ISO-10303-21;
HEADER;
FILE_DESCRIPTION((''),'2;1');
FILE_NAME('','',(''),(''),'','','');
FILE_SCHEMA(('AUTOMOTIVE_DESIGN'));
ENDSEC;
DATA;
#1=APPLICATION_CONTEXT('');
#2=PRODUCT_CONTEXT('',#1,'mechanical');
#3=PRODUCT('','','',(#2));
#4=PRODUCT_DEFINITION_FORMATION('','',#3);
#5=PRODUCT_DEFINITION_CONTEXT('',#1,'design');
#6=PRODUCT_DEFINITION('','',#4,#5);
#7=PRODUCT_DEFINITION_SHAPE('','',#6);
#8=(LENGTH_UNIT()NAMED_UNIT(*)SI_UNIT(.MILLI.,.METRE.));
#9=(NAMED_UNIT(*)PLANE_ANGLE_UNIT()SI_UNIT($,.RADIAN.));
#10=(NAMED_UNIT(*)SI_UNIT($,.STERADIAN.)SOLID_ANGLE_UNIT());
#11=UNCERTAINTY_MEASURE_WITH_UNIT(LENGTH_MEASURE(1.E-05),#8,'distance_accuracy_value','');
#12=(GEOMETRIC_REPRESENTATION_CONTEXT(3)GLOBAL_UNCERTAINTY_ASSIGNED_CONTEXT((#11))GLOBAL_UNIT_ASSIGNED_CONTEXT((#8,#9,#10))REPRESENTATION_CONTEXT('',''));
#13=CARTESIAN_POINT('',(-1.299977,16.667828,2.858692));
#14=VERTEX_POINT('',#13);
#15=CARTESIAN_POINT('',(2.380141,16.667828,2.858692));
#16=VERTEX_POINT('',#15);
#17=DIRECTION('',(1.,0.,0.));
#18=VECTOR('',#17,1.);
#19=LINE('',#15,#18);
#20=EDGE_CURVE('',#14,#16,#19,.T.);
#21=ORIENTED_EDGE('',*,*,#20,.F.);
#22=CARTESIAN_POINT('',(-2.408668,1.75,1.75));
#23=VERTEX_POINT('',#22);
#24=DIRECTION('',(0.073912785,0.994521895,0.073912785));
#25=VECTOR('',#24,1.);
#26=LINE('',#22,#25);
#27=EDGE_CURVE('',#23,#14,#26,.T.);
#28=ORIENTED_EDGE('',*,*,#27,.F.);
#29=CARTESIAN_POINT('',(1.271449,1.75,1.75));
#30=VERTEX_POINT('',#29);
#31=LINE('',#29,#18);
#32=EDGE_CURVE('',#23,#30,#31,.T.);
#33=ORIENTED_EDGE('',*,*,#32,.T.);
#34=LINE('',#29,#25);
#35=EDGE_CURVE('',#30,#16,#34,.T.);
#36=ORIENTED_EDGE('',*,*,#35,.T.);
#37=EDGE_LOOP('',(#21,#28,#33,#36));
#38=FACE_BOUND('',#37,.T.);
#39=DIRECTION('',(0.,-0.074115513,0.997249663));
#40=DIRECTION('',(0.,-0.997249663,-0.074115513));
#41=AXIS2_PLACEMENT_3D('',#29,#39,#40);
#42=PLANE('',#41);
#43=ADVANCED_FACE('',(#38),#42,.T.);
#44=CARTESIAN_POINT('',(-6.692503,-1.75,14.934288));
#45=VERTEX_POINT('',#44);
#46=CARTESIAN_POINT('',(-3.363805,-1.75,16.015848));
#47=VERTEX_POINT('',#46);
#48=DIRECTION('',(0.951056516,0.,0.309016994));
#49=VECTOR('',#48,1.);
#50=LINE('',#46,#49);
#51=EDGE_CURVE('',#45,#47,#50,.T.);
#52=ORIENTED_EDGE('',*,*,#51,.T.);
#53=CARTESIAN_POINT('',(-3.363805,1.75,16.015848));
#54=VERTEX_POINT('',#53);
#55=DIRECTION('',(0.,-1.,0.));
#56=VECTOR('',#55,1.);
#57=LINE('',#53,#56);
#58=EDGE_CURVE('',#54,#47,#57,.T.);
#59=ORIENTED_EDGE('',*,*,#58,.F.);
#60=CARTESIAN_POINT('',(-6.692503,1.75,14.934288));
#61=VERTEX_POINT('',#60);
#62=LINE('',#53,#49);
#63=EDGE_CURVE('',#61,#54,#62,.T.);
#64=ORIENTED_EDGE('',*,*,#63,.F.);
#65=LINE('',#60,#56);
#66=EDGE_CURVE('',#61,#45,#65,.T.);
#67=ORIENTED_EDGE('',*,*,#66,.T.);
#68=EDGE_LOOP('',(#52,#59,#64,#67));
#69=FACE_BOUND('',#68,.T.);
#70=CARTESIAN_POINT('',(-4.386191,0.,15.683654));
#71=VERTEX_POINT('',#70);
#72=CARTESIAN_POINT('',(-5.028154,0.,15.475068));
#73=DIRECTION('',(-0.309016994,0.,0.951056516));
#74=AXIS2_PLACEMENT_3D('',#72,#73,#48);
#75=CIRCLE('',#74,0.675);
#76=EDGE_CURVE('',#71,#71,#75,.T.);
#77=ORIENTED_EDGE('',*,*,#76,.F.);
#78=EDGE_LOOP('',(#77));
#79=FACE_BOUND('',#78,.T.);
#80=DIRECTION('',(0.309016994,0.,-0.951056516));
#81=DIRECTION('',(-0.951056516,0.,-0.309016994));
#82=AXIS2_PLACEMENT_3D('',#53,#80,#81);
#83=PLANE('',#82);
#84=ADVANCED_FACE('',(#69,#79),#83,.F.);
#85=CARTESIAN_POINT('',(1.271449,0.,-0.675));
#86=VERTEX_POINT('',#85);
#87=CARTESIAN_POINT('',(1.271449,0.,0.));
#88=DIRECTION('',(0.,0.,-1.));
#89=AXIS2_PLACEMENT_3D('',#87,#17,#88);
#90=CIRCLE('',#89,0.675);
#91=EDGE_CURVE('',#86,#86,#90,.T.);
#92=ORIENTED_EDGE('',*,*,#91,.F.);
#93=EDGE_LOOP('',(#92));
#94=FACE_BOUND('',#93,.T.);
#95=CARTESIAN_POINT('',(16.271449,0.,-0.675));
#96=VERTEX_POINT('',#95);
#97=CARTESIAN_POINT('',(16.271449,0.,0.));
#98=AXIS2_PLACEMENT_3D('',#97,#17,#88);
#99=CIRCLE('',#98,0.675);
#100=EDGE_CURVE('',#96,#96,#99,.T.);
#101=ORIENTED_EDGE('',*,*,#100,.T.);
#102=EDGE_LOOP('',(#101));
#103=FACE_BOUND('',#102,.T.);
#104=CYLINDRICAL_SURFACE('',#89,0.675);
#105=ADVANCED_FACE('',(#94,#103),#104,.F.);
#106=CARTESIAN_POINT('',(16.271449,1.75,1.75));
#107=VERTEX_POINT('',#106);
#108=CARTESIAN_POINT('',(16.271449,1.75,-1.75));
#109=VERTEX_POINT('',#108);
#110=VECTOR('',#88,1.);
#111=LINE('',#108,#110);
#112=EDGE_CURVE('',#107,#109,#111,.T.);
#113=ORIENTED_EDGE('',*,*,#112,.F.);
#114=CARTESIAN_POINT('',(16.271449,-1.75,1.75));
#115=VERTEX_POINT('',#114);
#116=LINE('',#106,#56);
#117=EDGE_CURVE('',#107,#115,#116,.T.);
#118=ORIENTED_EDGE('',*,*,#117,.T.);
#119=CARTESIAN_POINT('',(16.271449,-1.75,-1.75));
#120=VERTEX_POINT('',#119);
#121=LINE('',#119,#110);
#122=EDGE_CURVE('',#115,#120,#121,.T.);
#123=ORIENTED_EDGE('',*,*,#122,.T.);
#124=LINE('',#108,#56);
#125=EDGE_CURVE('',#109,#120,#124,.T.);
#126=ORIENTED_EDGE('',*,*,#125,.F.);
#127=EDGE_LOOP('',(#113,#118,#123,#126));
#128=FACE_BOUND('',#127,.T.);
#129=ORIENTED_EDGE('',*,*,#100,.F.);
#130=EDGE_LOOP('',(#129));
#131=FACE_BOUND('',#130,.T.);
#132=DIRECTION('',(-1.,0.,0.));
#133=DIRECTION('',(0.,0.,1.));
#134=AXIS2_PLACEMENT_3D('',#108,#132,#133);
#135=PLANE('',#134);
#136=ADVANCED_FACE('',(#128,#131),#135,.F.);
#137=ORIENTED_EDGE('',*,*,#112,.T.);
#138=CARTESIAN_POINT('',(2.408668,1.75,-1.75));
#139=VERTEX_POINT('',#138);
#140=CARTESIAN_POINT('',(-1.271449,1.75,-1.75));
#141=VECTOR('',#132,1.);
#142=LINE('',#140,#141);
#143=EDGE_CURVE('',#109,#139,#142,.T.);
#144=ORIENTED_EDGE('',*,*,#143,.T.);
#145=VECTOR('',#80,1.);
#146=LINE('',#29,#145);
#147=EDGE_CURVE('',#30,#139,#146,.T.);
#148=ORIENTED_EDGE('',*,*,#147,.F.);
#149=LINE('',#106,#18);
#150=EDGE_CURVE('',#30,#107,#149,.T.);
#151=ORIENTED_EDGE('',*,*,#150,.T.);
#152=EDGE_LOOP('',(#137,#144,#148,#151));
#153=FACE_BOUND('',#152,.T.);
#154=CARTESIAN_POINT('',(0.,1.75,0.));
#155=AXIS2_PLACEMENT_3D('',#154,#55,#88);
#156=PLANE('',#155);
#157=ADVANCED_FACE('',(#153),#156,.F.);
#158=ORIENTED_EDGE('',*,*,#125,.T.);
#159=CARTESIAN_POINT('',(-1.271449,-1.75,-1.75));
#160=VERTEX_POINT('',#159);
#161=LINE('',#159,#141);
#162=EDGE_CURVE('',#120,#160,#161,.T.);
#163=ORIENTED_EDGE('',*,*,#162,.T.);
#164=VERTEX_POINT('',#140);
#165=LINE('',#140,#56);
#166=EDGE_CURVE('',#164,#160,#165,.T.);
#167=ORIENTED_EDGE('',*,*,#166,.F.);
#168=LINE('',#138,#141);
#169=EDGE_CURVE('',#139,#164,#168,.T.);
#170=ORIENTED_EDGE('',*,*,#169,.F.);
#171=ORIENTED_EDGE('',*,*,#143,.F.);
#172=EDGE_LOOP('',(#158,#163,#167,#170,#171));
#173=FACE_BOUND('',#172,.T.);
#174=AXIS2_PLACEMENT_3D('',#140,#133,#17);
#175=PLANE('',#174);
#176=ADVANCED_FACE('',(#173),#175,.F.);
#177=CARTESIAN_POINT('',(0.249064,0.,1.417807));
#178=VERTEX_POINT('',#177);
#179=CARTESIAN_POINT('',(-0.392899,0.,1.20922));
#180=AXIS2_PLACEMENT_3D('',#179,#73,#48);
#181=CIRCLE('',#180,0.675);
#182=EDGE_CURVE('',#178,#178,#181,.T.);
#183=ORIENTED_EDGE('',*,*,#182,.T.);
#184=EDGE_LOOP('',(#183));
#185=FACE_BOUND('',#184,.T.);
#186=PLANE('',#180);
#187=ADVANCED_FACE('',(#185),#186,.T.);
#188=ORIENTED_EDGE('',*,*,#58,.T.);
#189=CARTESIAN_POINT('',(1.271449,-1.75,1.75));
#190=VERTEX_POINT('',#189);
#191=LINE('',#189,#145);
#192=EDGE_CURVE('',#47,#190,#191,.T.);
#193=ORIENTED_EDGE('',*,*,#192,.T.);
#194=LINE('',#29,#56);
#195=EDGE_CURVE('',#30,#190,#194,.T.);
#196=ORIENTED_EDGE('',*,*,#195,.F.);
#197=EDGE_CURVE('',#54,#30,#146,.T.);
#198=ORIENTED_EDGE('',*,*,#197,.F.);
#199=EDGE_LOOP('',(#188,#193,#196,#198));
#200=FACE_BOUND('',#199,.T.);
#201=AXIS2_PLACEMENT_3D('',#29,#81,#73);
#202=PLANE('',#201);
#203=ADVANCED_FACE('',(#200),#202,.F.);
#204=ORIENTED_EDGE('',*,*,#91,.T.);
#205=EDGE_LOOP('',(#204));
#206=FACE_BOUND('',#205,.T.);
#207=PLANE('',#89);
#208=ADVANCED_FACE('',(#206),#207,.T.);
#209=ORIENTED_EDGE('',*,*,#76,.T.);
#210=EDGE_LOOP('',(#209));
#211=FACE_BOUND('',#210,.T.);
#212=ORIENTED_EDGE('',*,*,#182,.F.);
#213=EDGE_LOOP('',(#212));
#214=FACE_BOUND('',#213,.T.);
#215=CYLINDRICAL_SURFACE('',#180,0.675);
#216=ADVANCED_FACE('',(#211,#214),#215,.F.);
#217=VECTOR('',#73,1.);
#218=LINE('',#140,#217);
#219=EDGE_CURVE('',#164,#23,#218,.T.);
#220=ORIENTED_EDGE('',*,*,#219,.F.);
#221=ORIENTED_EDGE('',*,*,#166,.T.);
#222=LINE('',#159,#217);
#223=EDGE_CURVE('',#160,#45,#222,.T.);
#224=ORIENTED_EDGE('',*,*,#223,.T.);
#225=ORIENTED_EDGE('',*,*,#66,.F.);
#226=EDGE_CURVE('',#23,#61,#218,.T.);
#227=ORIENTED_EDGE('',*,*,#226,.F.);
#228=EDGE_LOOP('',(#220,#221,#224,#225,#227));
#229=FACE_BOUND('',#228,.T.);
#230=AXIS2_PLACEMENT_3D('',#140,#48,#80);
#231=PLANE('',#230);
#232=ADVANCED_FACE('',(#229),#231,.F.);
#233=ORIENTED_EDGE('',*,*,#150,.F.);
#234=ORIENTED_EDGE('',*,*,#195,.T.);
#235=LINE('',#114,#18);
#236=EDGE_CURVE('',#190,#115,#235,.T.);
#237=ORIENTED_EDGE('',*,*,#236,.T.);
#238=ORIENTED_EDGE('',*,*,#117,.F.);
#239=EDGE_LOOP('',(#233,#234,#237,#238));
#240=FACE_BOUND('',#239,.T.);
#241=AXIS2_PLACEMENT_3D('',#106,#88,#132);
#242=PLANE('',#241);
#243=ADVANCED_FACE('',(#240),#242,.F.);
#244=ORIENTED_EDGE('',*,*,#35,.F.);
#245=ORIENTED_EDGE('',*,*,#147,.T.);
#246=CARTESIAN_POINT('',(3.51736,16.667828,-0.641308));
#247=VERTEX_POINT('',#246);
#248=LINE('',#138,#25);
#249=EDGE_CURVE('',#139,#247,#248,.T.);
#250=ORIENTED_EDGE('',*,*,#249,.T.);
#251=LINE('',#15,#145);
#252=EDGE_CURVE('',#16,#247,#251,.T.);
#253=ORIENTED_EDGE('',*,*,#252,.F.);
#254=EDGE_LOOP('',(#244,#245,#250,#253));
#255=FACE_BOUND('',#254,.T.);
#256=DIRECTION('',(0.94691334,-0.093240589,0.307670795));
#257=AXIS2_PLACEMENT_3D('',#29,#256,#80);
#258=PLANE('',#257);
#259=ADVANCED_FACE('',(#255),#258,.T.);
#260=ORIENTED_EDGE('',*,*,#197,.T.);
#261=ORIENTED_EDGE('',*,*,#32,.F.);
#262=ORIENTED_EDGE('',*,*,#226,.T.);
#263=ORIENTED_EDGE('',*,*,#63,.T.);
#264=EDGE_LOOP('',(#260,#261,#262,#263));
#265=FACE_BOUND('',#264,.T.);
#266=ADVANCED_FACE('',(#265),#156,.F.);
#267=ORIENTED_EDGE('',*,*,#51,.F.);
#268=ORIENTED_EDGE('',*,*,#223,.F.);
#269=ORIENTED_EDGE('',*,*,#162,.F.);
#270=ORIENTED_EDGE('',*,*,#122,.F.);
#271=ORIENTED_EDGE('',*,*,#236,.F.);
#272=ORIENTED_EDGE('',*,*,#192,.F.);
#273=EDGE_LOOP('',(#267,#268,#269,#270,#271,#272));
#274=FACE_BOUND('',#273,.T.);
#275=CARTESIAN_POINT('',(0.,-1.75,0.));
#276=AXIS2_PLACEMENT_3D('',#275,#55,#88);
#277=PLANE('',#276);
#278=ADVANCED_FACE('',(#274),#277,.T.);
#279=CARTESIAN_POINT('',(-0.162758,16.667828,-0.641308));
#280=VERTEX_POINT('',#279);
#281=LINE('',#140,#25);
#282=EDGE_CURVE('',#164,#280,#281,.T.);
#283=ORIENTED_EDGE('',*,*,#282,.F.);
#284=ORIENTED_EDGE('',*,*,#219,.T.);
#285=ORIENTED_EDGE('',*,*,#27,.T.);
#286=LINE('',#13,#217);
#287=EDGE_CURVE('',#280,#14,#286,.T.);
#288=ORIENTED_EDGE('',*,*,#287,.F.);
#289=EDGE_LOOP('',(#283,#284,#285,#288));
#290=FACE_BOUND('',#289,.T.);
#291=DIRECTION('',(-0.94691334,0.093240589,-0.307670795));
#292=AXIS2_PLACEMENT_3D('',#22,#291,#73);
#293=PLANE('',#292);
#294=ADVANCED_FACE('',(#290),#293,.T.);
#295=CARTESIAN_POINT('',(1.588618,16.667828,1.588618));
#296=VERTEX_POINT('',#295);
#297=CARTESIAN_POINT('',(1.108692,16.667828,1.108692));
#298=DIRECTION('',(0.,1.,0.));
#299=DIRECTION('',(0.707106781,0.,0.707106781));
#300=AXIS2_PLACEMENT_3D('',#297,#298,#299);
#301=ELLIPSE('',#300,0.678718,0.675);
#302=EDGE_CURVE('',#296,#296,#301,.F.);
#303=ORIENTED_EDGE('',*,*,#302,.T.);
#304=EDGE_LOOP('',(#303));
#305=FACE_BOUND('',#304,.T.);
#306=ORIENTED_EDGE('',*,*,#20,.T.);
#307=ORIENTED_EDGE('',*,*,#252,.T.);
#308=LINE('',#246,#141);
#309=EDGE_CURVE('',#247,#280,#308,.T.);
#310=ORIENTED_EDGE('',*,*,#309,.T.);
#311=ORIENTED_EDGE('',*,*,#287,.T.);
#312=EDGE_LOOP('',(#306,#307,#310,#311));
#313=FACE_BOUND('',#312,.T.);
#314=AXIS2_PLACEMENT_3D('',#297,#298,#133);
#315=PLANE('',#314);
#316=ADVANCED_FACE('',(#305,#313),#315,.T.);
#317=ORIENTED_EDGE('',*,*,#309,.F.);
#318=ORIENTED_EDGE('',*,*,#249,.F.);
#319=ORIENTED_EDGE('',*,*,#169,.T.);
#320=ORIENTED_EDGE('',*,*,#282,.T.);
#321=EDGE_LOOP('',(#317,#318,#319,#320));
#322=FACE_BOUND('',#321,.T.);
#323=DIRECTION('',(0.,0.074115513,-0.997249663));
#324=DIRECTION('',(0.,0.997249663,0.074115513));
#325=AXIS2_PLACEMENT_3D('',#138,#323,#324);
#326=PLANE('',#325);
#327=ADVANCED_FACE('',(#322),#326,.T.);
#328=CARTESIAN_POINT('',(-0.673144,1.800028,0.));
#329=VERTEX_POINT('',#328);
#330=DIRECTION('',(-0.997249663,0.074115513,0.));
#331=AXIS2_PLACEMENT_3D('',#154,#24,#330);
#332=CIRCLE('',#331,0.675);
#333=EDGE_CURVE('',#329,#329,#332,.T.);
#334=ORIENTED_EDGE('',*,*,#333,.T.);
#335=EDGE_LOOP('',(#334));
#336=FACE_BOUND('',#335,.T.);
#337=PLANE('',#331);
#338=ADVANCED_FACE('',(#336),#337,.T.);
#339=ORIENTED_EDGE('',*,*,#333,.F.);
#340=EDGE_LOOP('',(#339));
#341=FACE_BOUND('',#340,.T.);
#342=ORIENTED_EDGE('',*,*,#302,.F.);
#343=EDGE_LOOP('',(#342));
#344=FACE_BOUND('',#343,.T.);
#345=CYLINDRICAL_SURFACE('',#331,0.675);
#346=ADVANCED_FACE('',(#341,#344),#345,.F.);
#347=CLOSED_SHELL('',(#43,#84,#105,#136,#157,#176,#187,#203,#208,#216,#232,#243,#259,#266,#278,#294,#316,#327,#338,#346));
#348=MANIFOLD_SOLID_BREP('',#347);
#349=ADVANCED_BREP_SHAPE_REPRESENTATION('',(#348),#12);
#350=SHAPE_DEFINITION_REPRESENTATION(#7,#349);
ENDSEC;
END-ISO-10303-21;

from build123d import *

# Parameters (mm, degrees)
BOSS_EXTRUDE1_DEPTH  = 1.75
SKETCH3_R            = 0.675
CUT_EXTRUDE1_DEPTH   = 15
SKETCH4_R            = 0.675
CUT_EXTRUDE2_DEPTH   = 15
CUT_SWEEP1_START     = 1.740413317
CUT_SWEEP1_OUTLINE_R = 0.675
CUT_SWEEP1_DEPTH     = 15.070945459


# Read off the part's stored shape, not the designer's step: Cut-Sweep1
with BuildPart() as part:
    # Sketch2 → Boss-Extrude1 (new, symmetric)
    with BuildSketch(Plane(origin=(0, 0, 0), x_dir=(1, 0, 0), z_dir=(0, 1, 0))):
        Polygon((-1.271449424, 1.75), (-6.692503299, -14.934288264), (-3.363805492, -16.015847744), (1.271449424, -1.75), (16.271449424, -1.75), (16.271449424, 1.75), align=None)
    extrude(amount=BOSS_EXTRUDE1_DEPTH, both=True)

    # Sketch3 → Cut-Extrude1 (cut)
    with BuildSketch(Plane(origin=(-5.028154395, 0, 15.475068004), x_dir=(0.9510565162951536, 0, 0.3090169943749472), z_dir=(-0.3090169943749472, 0, 0.9510565162951536))):
        Circle(SKETCH3_R)
    extrude(amount=-CUT_EXTRUDE1_DEPTH, mode=Mode.SUBTRACT)

    # Sketch4 → Cut-Extrude2 (cut)
    with BuildSketch(Plane(origin=(16.271449424, 0, 0), x_dir=(0, 0, -1), z_dir=(1, 0, 0))):
        Circle(SKETCH4_R)
    extrude(amount=-CUT_EXTRUDE2_DEPTH, mode=Mode.SUBTRACT)

    # Sweep1: sweep along a path in Sketch7
    with BuildLine(Plane(origin=(0, 0, 0), x_dir=(0.7071067811865477, 0, 0.7071067811865475), z_dir=(-0.7071067811865475, 0, 0.7071067811865477))) as sweep1_path:
        Line((0, 1.75), (1.567926949, 16.667828431))
    # Sketch5 → Sweep1 (sweep)
    with BuildSketch(Plane(origin=(0, 1.75, 0), x_dir=(1, 0, 0), z_dir=(0, 1, 0))):
        Polygon((1.271449424, -1.75), (-2.408668361, -1.75), (-1.271449424, 1.75), (2.408668361, 1.75), align=None)
    sweep(path=sweep1_path.line)

    # Cut-Sweep1 outline → Cut-Sweep1 (cut)
    with BuildSketch(Plane(origin=(0, 0, 0), x_dir=(0.9972647091838012, -0.07370950015142784, -0.0054780839693199055), z_dir=(0.07391278520356448, 0.9945218953682737, 0.07391278520356448)).offset(CUT_SWEEP1_START)):
        with Locations((-0.128991625, 0.129702147)):
            Circle(CUT_SWEEP1_OUTLINE_R)
    extrude(amount=CUT_SWEEP1_DEPTH, mode=Mode.SUBTRACT)


solid = part.part
